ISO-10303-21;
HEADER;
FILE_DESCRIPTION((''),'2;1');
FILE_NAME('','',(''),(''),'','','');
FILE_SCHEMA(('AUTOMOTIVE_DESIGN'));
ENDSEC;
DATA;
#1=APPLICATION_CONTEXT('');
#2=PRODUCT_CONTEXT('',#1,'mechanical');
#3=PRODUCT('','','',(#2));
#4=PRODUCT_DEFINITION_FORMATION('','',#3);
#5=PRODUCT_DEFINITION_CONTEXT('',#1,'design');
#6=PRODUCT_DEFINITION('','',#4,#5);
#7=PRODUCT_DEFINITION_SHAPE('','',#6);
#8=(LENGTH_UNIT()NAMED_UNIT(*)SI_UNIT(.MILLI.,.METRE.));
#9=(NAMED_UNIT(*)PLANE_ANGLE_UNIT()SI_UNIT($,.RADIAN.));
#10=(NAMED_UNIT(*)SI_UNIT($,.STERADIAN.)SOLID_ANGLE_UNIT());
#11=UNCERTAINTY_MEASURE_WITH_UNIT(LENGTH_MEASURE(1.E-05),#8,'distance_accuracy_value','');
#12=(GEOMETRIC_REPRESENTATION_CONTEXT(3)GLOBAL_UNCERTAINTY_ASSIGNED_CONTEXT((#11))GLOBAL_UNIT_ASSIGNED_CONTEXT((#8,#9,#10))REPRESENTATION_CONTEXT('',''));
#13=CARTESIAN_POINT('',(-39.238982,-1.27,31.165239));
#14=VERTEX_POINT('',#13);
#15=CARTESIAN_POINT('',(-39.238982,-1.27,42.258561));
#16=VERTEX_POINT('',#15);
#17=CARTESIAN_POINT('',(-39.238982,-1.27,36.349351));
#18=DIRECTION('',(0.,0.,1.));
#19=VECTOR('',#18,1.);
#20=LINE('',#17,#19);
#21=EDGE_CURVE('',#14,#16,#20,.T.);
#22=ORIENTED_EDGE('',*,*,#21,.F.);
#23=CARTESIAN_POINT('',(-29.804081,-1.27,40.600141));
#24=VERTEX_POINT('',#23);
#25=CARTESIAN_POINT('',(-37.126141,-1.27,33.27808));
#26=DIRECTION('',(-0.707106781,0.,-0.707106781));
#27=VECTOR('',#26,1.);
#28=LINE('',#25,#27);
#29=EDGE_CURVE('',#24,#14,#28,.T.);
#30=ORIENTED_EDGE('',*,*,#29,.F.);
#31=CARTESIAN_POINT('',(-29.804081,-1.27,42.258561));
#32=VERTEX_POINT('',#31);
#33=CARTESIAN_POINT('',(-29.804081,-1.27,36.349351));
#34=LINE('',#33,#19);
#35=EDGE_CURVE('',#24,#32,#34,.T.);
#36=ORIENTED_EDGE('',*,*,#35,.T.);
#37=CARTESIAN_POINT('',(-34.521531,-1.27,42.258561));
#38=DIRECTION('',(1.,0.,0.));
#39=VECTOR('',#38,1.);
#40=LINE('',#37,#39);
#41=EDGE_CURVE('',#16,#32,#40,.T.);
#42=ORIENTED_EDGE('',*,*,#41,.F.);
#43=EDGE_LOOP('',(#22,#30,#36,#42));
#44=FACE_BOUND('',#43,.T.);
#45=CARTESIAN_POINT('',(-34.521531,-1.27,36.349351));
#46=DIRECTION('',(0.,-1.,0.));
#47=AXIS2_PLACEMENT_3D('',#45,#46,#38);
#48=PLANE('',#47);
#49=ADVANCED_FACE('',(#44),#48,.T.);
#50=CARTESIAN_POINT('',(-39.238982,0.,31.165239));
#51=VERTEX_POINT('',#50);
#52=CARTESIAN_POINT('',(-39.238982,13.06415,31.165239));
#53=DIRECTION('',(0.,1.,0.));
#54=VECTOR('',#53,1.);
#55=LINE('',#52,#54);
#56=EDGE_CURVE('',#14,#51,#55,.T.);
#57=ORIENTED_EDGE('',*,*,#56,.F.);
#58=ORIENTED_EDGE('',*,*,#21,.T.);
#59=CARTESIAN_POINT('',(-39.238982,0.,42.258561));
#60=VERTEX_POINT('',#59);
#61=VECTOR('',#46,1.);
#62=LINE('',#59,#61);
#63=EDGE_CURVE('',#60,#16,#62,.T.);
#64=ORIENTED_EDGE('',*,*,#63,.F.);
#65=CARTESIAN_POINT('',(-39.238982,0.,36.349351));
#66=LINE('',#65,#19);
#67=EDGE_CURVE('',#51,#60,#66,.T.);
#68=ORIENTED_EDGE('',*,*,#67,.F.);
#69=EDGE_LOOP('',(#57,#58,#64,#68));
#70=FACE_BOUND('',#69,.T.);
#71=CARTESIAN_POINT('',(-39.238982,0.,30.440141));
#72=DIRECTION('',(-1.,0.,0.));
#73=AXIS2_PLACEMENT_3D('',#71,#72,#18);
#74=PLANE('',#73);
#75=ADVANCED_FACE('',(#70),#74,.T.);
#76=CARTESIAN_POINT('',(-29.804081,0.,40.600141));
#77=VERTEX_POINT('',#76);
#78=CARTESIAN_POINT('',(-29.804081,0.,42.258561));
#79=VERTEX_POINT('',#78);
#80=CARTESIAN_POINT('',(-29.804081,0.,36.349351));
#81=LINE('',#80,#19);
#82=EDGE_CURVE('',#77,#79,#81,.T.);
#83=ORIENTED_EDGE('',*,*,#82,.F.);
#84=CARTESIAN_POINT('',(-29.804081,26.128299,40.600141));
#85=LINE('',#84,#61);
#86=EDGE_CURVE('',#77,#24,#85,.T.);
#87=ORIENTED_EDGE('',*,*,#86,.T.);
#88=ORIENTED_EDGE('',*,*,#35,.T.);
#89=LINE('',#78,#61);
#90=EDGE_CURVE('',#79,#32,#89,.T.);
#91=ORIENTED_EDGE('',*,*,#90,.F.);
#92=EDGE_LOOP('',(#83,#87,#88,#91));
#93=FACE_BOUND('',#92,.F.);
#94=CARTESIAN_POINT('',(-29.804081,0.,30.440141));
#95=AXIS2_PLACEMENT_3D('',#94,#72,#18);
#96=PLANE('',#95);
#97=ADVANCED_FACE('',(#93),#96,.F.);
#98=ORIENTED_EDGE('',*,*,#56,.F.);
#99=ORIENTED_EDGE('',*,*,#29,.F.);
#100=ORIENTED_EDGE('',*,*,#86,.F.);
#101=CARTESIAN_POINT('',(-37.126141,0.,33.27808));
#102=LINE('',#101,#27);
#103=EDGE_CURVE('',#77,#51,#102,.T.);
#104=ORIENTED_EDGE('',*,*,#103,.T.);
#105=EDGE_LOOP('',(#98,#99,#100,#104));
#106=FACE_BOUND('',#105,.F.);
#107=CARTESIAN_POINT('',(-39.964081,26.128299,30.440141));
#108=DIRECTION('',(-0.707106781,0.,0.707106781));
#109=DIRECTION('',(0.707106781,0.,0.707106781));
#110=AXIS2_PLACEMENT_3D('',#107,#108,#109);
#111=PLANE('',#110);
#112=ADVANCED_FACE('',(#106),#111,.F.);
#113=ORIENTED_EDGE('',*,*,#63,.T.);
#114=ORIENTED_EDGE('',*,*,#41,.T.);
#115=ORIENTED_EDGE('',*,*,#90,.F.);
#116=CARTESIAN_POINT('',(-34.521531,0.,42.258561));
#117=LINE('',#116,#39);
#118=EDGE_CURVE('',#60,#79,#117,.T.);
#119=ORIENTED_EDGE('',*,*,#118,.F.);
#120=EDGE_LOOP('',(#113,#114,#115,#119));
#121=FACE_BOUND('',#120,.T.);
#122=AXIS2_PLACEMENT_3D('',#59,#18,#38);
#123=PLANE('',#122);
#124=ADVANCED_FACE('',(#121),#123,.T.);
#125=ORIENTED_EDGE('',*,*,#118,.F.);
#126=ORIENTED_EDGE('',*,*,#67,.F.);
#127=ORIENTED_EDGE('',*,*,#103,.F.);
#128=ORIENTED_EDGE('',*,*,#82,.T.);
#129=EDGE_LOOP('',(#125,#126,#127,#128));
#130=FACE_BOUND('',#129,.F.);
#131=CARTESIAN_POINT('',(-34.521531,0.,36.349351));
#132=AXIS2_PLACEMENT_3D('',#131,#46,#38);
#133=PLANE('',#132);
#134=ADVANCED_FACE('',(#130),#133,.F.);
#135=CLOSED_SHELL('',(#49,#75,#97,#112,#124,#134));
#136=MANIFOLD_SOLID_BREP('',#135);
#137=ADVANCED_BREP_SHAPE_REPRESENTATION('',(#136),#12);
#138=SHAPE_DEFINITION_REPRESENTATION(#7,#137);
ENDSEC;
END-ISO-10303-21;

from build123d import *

# Parameters (mm, degrees)
F0_W        = 9.4349011779
F0_H        = 11.8184201419
F1_DEPTH    = 1.27
F2_T1_DEPTH = 53.5265983155


# Not quite as in the source:
# - a fillet or chamfer that OpenCascade refuses, or shapes differently, is made with other operations: its cross-section is extruded or revolved along the edge and cut away or added


with BuildPart() as f1:
    # F0 (on Front) → F1 (new body)
    with BuildSketch(Plane.XZ):
        with Locations((-34.5215313137, 36.3493505865)):
            Rectangle(F0_W, F0_H)
    extrude(amount=F1_DEPTH)

    # F2: chamfer of 10.16 on 1 edges, made by hand

    # F2_s2 → F2_t1 (cut)
    with BuildSketch(Plane.XZ.offset(-26.1282991577)):
        Polygon((-39.9640807247, 30.4401405156), (-29.8040807247, 40.6001405156), (-29.8040807247, 30.4401405156), align=None)
    extrude(amount=F2_T1_DEPTH, mode=Mode.SUBTRACT)


solid = f1.part
